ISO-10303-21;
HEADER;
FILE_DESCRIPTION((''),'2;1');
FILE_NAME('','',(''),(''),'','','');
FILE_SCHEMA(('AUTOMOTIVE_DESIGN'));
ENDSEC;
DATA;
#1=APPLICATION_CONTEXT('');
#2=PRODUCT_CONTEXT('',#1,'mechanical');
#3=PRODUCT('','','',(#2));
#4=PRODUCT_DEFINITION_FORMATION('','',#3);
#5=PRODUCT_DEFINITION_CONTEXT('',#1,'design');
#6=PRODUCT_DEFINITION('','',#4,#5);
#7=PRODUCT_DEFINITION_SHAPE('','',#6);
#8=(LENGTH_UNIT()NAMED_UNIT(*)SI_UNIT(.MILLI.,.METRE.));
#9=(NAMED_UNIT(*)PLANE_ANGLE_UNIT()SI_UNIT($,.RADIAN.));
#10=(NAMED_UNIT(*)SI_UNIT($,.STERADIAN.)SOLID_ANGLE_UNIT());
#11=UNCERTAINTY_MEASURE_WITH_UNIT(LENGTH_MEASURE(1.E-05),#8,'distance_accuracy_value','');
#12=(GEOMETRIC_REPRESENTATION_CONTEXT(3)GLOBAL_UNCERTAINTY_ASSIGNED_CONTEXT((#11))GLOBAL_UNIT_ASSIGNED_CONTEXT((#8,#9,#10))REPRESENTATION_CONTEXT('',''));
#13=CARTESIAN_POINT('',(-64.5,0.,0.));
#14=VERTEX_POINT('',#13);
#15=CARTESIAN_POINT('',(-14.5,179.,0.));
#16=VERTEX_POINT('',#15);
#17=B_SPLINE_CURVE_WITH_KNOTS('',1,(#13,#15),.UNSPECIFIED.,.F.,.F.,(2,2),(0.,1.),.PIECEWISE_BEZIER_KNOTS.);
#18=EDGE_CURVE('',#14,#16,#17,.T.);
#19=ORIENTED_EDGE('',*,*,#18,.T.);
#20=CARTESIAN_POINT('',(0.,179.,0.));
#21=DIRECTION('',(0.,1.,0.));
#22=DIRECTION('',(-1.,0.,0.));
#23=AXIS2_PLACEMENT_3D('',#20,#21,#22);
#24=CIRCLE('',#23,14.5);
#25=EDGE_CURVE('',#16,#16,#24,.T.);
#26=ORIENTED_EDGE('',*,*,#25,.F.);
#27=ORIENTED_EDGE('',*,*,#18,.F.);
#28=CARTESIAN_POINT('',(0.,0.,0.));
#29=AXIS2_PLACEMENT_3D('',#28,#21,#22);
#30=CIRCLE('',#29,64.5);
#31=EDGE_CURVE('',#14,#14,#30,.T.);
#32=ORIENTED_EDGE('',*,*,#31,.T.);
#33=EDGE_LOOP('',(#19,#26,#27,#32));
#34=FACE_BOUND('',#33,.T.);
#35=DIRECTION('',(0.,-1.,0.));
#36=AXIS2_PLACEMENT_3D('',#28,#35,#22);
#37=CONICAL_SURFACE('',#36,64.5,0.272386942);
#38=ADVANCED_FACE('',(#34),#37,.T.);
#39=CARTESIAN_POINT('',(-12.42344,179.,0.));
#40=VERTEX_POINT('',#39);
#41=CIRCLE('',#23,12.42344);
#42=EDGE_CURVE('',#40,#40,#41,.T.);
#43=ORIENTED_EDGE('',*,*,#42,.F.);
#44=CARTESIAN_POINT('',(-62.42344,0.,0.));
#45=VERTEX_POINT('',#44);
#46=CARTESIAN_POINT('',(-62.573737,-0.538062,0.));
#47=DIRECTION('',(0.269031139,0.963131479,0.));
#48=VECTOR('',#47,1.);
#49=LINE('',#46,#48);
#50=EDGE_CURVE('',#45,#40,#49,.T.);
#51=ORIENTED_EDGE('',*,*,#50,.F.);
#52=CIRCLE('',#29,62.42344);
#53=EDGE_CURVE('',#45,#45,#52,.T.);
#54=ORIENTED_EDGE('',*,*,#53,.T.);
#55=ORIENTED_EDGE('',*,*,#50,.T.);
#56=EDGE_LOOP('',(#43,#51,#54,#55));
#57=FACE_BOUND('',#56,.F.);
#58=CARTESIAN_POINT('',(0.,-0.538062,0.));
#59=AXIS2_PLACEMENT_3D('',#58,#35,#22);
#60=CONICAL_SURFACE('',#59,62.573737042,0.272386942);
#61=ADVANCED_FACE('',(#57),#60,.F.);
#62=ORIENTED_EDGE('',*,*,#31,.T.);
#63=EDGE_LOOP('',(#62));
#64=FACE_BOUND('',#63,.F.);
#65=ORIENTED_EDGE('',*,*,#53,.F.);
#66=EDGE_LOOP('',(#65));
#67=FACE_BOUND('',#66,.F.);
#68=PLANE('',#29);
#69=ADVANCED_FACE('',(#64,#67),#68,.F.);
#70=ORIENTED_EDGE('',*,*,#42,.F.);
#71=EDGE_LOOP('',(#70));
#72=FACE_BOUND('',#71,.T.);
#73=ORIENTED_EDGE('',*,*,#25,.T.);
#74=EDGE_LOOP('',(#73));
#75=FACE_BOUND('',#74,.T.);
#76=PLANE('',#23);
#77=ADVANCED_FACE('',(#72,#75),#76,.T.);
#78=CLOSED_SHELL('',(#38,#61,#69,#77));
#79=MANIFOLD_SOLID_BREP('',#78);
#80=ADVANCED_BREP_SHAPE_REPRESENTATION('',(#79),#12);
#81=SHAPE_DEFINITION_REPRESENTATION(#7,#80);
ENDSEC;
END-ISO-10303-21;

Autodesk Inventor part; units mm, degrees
ref_plane "YZ Plane" through (0, 0, 0) normal (1, 0, 0) x (0, 1, 0)
ref_plane "XY Plane" through (0, 0, 0) normal (0, 0, 1) x (1, 0, 0)
sketch "Szkic6" plane through (0, 0, 0) normal (0, 1, 0) x (-1, 0, 0)
  circle A0 centre (0, 0) radius 64.5
  dimension "d33" = 129
ref_plane "Płaszczyzna konstrukcyjna1" through (0, 179, 0) normal (0, 1, 0) x (-1, 0, 0)
sketch "Szkic7" plane through (0, 179, 0) normal (0, 1, 0) x (-1, 0, 0)
  circle A0 centre (0, 0) radius 14.5
  dimension "d35" = 29
loft "Wyciągnięcie złożone1" add profiles "Szkic6", "Szkic7"
shell "Skorupa1" thickness 2 removed faces 2 at (1.052, 179, -3.5603) at (-10.0865, 0, -16.1433)
equation "\"d33\" = OD1"
equation "\"d35\" = OD2"
equation "\"d52\" = THK"
equation "\"SzerokośćGięciaPodcięcia\" = Grubość"
equation "\"RozmiarPodcięciaNarożnika\" = 4 * Grubość"
equation "\"PromieńPrzejścia\" = PromieńGięcia"
equation "\"Rozmiar_promienia_Jacobiego\" = PromieńGięcia"
equation "\"Wielk_odstępu\" = Grubość"
equation "\"d2\" = PromieńGięcia"
equation "\"d23\" = PromieńGięcia"
equation "\"OD1\" = 129"
equation "\"OD2\" = 29"
equation "\"L\" = 179"
equation "\"THK\" = 2"
equation "\"d34\" = L"
equation "\"Grubość\" = 1.5"
equation "\"PromieńGięcia\" = 3"
properties part number "Redukcja symetryczna Ø129x29x2 L=179" material "304"
